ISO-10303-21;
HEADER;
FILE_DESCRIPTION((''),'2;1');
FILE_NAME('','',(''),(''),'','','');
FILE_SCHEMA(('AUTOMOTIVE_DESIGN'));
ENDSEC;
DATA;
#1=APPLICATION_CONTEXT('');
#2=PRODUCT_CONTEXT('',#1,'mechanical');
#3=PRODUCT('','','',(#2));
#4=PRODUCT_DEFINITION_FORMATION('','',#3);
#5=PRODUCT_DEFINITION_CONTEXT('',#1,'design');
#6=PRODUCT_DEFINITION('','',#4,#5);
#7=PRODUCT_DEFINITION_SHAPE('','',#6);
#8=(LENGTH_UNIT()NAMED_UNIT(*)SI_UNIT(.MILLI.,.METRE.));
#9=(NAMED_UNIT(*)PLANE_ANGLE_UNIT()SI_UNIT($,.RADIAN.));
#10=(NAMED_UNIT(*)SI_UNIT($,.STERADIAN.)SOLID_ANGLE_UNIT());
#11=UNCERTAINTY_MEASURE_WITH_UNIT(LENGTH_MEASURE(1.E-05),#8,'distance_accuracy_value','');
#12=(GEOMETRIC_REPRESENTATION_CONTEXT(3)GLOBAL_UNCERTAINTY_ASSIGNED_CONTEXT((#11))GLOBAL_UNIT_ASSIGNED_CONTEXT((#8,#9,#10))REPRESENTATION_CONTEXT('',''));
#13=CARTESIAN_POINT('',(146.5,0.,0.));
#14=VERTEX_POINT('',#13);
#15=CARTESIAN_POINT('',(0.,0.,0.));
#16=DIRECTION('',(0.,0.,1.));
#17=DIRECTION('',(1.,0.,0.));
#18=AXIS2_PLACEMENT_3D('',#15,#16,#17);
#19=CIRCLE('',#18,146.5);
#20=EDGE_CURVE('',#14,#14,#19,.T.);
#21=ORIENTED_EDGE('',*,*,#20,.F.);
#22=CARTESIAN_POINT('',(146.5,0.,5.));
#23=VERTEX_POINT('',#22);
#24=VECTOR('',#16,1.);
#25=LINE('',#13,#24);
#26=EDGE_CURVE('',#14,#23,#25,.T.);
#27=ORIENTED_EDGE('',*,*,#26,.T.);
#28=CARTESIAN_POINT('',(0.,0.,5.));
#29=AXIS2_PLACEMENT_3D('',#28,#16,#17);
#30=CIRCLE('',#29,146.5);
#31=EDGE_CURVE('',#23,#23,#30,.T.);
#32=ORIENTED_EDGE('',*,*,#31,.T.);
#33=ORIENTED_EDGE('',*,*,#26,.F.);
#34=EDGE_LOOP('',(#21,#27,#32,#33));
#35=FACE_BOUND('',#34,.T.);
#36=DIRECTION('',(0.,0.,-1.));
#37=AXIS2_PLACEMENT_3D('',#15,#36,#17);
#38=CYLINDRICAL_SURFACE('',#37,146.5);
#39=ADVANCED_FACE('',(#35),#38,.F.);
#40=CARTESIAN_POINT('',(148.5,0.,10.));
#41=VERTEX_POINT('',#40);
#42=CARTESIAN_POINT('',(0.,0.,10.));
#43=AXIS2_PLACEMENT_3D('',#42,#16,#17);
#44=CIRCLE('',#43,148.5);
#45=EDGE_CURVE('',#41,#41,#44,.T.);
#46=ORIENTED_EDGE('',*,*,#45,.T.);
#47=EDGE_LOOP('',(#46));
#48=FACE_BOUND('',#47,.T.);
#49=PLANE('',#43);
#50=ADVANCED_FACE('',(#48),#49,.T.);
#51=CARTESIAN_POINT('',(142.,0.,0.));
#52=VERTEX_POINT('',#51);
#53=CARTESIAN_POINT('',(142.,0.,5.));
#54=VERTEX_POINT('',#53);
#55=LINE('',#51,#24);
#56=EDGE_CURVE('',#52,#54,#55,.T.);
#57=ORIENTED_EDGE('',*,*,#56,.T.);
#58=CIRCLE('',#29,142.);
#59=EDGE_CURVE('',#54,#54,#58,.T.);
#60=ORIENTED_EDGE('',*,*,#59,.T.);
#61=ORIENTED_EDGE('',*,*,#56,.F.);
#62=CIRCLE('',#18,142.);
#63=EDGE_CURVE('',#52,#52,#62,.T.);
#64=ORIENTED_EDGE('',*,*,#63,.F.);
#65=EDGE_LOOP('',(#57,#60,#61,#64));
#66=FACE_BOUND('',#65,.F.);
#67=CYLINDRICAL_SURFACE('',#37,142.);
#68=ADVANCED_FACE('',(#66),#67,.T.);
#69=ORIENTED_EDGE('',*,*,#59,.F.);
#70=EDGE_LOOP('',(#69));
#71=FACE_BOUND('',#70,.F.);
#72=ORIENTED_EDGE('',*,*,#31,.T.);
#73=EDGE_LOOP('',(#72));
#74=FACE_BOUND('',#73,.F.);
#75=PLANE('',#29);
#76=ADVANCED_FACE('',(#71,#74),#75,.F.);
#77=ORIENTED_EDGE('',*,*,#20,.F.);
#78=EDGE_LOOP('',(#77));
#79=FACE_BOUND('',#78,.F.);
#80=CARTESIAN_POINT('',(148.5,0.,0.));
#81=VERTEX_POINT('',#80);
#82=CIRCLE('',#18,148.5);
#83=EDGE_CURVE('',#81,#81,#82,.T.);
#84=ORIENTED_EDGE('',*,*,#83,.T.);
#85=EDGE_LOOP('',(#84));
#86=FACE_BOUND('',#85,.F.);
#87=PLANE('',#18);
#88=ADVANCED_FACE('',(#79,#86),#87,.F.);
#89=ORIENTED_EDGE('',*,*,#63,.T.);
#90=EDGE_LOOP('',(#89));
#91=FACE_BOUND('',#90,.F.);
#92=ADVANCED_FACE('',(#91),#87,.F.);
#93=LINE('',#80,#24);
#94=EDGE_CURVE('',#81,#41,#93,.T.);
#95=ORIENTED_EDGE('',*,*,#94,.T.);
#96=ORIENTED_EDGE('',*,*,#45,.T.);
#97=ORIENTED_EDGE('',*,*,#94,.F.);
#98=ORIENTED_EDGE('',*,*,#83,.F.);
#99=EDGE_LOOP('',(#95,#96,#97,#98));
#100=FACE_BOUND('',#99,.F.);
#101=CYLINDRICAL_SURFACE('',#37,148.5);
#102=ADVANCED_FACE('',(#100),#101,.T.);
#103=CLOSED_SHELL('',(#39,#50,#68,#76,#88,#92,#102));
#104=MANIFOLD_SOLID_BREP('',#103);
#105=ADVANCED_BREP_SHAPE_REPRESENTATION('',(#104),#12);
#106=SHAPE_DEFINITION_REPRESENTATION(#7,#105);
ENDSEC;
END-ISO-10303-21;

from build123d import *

# Parameters (mm, degrees)
F0_R     = 148.5
F1_DEPTH = 10
F2_R     = 146.5
F2_R_2   = 142
F3_DEPTH = 5


# Not quite as in the source:
# - a feature names something its author has since deleted; it is built from what else it names


with BuildPart() as f1:
    # F0 (on Top) → F1 (new body)
    with BuildSketch(Plane.XY):
        Circle(F0_R)
    extrude(amount=F1_DEPTH)

    # F2 (on face) → F3 (cut)
    with BuildSketch(Plane.XY):
        Circle(F2_R)
        Circle(F2_R_2, mode=Mode.SUBTRACT)
    extrude(amount=F3_DEPTH, mode=Mode.SUBTRACT)


solid = f1.part
